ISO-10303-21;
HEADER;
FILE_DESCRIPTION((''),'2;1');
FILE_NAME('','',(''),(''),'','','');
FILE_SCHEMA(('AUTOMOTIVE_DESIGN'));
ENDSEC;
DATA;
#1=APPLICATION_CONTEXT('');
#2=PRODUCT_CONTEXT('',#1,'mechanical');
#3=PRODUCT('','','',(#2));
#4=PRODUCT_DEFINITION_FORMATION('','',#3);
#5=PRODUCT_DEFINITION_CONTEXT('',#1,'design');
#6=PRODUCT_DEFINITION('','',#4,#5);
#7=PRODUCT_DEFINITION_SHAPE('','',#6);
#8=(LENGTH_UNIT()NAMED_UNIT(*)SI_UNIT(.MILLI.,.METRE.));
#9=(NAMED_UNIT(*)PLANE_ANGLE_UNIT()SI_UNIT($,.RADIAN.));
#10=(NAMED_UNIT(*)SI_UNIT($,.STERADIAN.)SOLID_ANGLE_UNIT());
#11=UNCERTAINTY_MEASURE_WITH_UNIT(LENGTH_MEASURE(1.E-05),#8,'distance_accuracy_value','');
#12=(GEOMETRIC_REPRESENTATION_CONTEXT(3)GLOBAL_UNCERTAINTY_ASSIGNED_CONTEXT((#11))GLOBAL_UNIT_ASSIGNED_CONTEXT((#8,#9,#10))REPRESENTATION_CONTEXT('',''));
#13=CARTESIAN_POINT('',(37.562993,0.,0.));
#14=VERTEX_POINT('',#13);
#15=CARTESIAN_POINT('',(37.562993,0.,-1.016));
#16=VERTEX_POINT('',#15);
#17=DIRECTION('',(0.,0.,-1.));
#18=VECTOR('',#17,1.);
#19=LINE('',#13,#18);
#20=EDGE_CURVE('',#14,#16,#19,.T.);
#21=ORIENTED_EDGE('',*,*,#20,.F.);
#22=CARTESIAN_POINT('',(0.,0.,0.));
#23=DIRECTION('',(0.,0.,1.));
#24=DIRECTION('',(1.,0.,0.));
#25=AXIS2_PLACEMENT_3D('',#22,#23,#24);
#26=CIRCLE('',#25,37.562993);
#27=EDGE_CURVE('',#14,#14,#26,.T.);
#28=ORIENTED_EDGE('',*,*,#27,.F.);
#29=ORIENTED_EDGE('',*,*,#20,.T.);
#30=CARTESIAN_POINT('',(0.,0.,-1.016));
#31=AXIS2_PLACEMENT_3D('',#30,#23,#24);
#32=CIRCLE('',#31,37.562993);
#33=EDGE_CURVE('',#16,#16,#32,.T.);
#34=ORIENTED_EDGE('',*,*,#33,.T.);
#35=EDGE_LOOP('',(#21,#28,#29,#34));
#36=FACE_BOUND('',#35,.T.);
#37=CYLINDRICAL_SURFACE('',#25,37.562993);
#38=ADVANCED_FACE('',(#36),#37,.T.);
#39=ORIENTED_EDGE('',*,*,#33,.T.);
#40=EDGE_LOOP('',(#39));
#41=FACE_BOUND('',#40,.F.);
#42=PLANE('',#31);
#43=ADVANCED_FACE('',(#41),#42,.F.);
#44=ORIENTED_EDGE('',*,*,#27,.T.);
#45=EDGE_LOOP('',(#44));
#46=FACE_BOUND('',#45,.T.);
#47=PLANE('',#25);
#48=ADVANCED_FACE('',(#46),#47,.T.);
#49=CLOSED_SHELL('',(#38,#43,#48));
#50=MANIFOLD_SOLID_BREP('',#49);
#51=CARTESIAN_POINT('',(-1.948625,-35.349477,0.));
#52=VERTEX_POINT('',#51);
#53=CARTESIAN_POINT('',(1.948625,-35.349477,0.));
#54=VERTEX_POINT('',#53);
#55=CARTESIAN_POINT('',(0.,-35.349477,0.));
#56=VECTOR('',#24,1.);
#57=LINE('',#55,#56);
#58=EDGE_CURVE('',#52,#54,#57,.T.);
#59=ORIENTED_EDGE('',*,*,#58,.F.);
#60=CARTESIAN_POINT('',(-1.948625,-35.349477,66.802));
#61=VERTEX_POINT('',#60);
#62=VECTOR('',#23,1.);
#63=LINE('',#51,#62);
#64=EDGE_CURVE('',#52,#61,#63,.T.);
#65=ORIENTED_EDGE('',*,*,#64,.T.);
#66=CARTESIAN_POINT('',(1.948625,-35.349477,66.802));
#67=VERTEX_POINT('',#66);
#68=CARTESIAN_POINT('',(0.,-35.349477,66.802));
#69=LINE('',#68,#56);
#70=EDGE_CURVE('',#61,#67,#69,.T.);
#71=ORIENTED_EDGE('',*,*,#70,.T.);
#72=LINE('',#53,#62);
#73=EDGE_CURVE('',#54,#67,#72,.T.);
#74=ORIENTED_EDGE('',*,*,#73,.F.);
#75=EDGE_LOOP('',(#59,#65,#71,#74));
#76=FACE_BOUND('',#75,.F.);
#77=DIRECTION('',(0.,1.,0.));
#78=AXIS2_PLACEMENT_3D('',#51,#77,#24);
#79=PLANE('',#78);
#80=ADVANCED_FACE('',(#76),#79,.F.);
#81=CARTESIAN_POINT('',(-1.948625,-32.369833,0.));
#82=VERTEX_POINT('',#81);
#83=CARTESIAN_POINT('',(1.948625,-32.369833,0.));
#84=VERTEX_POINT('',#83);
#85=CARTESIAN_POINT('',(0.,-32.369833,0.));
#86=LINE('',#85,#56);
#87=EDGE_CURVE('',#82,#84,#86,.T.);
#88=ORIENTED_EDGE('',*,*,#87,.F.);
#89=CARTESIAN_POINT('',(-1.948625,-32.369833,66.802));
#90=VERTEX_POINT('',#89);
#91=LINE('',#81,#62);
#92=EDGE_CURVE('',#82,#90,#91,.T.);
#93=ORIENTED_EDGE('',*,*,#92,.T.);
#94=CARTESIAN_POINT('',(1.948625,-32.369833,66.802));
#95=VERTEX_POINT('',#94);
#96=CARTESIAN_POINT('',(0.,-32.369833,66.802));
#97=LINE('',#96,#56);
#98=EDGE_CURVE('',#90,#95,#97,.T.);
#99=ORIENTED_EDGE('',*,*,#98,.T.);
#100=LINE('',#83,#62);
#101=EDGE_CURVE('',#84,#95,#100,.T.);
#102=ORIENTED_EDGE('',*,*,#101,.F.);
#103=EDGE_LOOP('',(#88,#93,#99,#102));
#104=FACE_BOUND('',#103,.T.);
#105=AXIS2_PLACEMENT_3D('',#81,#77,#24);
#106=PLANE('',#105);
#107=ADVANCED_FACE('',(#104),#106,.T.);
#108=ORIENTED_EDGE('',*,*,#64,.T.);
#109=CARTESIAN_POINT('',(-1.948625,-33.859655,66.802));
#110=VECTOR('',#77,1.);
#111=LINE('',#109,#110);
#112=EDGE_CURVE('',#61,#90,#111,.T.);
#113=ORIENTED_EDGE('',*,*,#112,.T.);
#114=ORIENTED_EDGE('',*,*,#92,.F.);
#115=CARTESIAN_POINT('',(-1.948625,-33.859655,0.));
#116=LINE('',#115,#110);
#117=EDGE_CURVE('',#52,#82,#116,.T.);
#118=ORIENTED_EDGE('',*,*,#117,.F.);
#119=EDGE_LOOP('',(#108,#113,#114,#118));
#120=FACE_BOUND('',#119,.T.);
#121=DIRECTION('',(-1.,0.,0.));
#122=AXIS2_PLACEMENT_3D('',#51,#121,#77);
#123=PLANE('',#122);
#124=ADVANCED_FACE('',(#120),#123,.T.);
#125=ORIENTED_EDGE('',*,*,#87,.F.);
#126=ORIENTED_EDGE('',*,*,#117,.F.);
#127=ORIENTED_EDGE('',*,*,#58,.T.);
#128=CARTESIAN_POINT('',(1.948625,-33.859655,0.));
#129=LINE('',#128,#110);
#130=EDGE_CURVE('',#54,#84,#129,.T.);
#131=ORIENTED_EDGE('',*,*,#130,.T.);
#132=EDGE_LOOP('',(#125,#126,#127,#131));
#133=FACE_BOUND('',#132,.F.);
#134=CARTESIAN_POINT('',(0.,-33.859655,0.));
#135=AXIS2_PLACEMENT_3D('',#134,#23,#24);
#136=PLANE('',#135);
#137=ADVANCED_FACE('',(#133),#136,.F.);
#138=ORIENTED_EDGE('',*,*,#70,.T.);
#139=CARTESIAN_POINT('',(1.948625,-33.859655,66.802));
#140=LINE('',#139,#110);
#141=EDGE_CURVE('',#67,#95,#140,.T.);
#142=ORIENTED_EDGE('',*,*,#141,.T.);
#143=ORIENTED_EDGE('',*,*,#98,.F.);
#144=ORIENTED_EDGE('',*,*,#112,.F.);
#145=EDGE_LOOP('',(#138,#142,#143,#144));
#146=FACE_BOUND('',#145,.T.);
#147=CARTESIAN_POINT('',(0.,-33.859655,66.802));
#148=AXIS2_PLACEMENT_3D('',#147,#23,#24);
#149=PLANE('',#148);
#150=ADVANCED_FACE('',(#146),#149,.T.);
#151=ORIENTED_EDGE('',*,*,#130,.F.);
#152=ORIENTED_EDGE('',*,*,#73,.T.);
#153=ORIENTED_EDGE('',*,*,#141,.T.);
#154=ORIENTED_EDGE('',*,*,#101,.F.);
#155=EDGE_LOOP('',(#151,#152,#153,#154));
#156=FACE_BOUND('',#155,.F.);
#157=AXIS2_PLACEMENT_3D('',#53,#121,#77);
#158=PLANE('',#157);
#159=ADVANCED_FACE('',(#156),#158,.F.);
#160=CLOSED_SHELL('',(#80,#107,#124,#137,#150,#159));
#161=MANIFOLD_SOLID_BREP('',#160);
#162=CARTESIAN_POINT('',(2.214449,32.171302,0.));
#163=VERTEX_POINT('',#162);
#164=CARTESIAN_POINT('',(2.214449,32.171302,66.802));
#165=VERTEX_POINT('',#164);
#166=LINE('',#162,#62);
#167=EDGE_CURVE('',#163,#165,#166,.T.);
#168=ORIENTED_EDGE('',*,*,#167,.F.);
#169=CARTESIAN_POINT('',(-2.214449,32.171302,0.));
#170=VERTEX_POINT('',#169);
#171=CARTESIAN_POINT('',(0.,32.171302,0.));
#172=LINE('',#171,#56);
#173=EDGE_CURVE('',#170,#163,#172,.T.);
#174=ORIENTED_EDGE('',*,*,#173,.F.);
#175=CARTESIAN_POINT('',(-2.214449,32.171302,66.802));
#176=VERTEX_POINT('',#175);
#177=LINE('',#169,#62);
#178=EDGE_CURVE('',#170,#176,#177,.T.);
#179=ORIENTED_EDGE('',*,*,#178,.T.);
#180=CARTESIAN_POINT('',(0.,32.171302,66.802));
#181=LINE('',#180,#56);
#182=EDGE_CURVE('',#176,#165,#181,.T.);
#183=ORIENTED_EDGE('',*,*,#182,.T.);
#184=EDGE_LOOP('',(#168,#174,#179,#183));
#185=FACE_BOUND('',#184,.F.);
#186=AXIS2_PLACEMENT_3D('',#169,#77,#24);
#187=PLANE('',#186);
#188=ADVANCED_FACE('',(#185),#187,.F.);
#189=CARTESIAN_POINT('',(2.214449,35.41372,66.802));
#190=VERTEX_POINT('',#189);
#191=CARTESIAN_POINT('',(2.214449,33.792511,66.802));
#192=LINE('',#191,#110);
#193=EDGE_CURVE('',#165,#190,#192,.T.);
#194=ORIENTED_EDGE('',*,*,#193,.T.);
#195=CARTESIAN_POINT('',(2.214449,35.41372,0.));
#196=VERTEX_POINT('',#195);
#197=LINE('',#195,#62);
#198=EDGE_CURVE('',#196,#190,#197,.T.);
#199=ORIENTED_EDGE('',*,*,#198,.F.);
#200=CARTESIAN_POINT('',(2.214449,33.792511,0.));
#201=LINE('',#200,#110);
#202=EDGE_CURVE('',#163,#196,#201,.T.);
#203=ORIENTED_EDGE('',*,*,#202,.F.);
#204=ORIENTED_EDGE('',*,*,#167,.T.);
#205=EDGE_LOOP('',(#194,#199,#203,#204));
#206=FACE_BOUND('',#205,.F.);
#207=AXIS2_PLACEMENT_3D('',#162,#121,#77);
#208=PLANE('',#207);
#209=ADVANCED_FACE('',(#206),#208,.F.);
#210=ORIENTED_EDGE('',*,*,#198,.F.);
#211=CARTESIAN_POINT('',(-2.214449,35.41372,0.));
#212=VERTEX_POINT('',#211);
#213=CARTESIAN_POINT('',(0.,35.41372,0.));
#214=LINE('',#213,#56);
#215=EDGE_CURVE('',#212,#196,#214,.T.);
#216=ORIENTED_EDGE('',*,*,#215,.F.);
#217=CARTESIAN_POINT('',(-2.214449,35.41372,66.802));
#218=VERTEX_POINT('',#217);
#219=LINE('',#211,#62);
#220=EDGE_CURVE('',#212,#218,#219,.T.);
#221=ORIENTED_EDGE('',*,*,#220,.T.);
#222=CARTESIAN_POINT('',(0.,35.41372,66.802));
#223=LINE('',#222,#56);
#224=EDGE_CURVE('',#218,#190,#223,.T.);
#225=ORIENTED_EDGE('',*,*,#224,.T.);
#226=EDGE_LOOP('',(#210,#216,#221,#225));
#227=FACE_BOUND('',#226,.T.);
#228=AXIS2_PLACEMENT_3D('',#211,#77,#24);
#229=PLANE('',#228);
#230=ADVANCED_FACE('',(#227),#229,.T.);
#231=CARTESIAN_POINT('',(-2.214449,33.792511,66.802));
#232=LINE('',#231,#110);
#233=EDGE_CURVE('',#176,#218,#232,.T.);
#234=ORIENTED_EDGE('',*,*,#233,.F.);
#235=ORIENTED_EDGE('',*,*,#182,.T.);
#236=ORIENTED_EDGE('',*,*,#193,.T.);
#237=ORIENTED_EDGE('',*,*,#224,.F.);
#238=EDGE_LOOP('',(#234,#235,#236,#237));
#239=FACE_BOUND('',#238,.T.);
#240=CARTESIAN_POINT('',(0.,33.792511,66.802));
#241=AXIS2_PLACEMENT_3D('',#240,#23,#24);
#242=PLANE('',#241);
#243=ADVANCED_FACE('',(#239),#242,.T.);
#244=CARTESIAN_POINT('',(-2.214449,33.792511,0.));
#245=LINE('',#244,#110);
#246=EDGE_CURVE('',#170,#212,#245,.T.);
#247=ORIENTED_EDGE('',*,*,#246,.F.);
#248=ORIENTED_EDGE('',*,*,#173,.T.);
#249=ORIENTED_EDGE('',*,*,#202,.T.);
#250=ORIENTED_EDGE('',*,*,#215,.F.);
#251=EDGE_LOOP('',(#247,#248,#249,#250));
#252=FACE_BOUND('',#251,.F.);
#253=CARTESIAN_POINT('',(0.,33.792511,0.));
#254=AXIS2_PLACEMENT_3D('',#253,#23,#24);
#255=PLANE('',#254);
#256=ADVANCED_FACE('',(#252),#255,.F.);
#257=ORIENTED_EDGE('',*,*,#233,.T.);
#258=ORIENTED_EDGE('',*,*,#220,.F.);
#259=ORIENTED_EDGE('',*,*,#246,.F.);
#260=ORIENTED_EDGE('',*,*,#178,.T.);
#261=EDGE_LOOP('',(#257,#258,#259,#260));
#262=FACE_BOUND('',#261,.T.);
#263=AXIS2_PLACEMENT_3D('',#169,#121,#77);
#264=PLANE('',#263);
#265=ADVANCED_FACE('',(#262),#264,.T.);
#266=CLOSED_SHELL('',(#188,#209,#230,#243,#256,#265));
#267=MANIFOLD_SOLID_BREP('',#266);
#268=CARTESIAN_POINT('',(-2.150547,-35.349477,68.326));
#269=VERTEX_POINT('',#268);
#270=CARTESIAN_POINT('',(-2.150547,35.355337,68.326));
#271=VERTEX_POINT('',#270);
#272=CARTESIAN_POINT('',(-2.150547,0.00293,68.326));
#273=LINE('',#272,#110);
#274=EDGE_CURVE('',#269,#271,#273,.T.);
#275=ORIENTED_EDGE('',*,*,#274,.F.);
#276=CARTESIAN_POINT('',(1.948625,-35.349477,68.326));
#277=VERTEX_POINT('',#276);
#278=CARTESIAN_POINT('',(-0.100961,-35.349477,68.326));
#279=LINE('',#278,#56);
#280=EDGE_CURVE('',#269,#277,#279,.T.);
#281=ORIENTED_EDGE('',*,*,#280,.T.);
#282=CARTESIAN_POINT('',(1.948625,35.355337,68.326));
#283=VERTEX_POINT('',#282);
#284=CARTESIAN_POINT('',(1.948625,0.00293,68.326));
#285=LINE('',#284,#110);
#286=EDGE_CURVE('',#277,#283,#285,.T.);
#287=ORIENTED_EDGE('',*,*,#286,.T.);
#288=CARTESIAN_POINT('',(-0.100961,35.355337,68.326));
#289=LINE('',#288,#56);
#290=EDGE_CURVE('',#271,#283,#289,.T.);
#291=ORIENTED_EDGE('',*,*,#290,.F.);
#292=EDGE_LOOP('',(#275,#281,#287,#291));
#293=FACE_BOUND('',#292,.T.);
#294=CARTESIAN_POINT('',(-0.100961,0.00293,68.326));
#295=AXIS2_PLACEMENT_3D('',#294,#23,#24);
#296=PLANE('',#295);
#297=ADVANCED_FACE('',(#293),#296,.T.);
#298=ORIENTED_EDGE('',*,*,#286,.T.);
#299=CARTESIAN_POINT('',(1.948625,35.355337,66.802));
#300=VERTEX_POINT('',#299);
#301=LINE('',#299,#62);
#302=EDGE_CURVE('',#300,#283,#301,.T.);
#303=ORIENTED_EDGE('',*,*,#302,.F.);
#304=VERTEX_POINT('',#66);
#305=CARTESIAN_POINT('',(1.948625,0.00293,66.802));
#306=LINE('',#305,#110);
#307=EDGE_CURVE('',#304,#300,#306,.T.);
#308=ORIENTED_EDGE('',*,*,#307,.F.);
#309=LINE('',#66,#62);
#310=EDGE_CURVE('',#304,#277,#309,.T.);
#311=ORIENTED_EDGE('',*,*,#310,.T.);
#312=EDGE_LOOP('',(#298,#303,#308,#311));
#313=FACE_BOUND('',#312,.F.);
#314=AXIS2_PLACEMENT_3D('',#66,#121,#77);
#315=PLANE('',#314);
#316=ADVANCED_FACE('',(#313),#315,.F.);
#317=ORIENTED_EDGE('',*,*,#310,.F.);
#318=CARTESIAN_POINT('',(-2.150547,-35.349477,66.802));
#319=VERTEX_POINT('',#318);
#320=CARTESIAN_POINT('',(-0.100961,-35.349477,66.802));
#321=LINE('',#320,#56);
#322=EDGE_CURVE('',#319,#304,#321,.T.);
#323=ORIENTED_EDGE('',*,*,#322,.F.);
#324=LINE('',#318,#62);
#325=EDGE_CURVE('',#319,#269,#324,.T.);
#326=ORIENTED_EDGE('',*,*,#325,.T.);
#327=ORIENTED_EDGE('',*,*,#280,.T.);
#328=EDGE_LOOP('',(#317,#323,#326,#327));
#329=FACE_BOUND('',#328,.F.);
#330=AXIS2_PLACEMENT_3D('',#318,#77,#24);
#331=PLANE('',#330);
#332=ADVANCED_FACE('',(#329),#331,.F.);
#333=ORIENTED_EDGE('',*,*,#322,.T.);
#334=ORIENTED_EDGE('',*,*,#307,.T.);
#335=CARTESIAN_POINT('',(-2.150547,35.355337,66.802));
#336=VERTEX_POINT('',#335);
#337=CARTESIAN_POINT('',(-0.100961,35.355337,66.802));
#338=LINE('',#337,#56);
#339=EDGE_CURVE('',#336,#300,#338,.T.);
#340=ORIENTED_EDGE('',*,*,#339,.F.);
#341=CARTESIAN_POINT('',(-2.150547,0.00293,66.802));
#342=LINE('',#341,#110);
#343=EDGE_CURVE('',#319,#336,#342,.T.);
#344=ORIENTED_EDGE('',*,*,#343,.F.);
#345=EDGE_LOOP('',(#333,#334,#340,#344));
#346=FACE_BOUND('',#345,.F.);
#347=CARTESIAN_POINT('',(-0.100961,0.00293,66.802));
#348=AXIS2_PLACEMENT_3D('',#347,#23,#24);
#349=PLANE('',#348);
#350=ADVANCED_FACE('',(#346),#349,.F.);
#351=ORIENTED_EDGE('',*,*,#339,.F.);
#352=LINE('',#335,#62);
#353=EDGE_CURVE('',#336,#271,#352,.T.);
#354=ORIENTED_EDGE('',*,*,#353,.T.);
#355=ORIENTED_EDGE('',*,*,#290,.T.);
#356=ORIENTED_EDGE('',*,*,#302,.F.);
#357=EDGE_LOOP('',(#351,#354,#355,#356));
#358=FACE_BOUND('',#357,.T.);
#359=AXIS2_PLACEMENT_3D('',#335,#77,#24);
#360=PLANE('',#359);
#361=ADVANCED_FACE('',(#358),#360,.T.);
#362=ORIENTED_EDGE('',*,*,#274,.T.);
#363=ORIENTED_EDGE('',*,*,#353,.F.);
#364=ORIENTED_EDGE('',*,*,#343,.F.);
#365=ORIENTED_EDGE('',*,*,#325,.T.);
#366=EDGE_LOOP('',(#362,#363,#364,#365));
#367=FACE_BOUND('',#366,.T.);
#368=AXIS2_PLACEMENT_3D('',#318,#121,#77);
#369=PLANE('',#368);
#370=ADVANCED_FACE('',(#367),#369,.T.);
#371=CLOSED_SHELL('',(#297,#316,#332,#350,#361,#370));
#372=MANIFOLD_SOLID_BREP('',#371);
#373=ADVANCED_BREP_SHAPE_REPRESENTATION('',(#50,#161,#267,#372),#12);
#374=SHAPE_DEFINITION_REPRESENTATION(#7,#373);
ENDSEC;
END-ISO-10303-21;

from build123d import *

# Parameters (mm, degrees)
F1_W     = 3.897249233
F1_H     = 2.9796436429
F2_DEPTH = 66.802
F1_W_2   = 4.4288989156
F1_H_2   = 3.24241817
F3_W     = 4.099171143
F3_H     = 70.7048140466
F4_DEPTH = 1.524
F0_R     = 37.5629925572
F5_DEPTH = 1.016


# Not quite as in the source:
# - the program builds the solid bodies; features that only make, move or delete a surface that nothing else refers to are left out


with BuildPart() as f2:
    # F1 (on face) → F2 (new body)
    with BuildSketch(Plane.XY):
        with Locations((0, -33.859655261)):
            Rectangle(F1_W, F1_H)
    extrude(amount=F2_DEPTH)


with BuildPart() as f2b:
    # F1 (on face) → F2, piece 2 (new body)
    with BuildSketch(Plane.XY):
        with Locations((0, 33.7925106287)):
            Rectangle(F1_W_2, F1_H_2)
    extrude(amount=F2_DEPTH)


with BuildPart() as f4:
    # F3 (on face) → F4 (new body)
    with BuildSketch(Plane.XY.offset(66.802)):
        with Locations((-0.100960955, 0.0029299408)):
            Rectangle(F3_W, F3_H)
    extrude(amount=F4_DEPTH)


with BuildPart() as f5:
    # F0 (on Top) → F5 (new body)
    with BuildSketch(Plane.XY):
        Circle(F0_R)
    extrude(amount=-F5_DEPTH)


solid = Compound([f2.part, f2b.part, f4.part, f5.part])
